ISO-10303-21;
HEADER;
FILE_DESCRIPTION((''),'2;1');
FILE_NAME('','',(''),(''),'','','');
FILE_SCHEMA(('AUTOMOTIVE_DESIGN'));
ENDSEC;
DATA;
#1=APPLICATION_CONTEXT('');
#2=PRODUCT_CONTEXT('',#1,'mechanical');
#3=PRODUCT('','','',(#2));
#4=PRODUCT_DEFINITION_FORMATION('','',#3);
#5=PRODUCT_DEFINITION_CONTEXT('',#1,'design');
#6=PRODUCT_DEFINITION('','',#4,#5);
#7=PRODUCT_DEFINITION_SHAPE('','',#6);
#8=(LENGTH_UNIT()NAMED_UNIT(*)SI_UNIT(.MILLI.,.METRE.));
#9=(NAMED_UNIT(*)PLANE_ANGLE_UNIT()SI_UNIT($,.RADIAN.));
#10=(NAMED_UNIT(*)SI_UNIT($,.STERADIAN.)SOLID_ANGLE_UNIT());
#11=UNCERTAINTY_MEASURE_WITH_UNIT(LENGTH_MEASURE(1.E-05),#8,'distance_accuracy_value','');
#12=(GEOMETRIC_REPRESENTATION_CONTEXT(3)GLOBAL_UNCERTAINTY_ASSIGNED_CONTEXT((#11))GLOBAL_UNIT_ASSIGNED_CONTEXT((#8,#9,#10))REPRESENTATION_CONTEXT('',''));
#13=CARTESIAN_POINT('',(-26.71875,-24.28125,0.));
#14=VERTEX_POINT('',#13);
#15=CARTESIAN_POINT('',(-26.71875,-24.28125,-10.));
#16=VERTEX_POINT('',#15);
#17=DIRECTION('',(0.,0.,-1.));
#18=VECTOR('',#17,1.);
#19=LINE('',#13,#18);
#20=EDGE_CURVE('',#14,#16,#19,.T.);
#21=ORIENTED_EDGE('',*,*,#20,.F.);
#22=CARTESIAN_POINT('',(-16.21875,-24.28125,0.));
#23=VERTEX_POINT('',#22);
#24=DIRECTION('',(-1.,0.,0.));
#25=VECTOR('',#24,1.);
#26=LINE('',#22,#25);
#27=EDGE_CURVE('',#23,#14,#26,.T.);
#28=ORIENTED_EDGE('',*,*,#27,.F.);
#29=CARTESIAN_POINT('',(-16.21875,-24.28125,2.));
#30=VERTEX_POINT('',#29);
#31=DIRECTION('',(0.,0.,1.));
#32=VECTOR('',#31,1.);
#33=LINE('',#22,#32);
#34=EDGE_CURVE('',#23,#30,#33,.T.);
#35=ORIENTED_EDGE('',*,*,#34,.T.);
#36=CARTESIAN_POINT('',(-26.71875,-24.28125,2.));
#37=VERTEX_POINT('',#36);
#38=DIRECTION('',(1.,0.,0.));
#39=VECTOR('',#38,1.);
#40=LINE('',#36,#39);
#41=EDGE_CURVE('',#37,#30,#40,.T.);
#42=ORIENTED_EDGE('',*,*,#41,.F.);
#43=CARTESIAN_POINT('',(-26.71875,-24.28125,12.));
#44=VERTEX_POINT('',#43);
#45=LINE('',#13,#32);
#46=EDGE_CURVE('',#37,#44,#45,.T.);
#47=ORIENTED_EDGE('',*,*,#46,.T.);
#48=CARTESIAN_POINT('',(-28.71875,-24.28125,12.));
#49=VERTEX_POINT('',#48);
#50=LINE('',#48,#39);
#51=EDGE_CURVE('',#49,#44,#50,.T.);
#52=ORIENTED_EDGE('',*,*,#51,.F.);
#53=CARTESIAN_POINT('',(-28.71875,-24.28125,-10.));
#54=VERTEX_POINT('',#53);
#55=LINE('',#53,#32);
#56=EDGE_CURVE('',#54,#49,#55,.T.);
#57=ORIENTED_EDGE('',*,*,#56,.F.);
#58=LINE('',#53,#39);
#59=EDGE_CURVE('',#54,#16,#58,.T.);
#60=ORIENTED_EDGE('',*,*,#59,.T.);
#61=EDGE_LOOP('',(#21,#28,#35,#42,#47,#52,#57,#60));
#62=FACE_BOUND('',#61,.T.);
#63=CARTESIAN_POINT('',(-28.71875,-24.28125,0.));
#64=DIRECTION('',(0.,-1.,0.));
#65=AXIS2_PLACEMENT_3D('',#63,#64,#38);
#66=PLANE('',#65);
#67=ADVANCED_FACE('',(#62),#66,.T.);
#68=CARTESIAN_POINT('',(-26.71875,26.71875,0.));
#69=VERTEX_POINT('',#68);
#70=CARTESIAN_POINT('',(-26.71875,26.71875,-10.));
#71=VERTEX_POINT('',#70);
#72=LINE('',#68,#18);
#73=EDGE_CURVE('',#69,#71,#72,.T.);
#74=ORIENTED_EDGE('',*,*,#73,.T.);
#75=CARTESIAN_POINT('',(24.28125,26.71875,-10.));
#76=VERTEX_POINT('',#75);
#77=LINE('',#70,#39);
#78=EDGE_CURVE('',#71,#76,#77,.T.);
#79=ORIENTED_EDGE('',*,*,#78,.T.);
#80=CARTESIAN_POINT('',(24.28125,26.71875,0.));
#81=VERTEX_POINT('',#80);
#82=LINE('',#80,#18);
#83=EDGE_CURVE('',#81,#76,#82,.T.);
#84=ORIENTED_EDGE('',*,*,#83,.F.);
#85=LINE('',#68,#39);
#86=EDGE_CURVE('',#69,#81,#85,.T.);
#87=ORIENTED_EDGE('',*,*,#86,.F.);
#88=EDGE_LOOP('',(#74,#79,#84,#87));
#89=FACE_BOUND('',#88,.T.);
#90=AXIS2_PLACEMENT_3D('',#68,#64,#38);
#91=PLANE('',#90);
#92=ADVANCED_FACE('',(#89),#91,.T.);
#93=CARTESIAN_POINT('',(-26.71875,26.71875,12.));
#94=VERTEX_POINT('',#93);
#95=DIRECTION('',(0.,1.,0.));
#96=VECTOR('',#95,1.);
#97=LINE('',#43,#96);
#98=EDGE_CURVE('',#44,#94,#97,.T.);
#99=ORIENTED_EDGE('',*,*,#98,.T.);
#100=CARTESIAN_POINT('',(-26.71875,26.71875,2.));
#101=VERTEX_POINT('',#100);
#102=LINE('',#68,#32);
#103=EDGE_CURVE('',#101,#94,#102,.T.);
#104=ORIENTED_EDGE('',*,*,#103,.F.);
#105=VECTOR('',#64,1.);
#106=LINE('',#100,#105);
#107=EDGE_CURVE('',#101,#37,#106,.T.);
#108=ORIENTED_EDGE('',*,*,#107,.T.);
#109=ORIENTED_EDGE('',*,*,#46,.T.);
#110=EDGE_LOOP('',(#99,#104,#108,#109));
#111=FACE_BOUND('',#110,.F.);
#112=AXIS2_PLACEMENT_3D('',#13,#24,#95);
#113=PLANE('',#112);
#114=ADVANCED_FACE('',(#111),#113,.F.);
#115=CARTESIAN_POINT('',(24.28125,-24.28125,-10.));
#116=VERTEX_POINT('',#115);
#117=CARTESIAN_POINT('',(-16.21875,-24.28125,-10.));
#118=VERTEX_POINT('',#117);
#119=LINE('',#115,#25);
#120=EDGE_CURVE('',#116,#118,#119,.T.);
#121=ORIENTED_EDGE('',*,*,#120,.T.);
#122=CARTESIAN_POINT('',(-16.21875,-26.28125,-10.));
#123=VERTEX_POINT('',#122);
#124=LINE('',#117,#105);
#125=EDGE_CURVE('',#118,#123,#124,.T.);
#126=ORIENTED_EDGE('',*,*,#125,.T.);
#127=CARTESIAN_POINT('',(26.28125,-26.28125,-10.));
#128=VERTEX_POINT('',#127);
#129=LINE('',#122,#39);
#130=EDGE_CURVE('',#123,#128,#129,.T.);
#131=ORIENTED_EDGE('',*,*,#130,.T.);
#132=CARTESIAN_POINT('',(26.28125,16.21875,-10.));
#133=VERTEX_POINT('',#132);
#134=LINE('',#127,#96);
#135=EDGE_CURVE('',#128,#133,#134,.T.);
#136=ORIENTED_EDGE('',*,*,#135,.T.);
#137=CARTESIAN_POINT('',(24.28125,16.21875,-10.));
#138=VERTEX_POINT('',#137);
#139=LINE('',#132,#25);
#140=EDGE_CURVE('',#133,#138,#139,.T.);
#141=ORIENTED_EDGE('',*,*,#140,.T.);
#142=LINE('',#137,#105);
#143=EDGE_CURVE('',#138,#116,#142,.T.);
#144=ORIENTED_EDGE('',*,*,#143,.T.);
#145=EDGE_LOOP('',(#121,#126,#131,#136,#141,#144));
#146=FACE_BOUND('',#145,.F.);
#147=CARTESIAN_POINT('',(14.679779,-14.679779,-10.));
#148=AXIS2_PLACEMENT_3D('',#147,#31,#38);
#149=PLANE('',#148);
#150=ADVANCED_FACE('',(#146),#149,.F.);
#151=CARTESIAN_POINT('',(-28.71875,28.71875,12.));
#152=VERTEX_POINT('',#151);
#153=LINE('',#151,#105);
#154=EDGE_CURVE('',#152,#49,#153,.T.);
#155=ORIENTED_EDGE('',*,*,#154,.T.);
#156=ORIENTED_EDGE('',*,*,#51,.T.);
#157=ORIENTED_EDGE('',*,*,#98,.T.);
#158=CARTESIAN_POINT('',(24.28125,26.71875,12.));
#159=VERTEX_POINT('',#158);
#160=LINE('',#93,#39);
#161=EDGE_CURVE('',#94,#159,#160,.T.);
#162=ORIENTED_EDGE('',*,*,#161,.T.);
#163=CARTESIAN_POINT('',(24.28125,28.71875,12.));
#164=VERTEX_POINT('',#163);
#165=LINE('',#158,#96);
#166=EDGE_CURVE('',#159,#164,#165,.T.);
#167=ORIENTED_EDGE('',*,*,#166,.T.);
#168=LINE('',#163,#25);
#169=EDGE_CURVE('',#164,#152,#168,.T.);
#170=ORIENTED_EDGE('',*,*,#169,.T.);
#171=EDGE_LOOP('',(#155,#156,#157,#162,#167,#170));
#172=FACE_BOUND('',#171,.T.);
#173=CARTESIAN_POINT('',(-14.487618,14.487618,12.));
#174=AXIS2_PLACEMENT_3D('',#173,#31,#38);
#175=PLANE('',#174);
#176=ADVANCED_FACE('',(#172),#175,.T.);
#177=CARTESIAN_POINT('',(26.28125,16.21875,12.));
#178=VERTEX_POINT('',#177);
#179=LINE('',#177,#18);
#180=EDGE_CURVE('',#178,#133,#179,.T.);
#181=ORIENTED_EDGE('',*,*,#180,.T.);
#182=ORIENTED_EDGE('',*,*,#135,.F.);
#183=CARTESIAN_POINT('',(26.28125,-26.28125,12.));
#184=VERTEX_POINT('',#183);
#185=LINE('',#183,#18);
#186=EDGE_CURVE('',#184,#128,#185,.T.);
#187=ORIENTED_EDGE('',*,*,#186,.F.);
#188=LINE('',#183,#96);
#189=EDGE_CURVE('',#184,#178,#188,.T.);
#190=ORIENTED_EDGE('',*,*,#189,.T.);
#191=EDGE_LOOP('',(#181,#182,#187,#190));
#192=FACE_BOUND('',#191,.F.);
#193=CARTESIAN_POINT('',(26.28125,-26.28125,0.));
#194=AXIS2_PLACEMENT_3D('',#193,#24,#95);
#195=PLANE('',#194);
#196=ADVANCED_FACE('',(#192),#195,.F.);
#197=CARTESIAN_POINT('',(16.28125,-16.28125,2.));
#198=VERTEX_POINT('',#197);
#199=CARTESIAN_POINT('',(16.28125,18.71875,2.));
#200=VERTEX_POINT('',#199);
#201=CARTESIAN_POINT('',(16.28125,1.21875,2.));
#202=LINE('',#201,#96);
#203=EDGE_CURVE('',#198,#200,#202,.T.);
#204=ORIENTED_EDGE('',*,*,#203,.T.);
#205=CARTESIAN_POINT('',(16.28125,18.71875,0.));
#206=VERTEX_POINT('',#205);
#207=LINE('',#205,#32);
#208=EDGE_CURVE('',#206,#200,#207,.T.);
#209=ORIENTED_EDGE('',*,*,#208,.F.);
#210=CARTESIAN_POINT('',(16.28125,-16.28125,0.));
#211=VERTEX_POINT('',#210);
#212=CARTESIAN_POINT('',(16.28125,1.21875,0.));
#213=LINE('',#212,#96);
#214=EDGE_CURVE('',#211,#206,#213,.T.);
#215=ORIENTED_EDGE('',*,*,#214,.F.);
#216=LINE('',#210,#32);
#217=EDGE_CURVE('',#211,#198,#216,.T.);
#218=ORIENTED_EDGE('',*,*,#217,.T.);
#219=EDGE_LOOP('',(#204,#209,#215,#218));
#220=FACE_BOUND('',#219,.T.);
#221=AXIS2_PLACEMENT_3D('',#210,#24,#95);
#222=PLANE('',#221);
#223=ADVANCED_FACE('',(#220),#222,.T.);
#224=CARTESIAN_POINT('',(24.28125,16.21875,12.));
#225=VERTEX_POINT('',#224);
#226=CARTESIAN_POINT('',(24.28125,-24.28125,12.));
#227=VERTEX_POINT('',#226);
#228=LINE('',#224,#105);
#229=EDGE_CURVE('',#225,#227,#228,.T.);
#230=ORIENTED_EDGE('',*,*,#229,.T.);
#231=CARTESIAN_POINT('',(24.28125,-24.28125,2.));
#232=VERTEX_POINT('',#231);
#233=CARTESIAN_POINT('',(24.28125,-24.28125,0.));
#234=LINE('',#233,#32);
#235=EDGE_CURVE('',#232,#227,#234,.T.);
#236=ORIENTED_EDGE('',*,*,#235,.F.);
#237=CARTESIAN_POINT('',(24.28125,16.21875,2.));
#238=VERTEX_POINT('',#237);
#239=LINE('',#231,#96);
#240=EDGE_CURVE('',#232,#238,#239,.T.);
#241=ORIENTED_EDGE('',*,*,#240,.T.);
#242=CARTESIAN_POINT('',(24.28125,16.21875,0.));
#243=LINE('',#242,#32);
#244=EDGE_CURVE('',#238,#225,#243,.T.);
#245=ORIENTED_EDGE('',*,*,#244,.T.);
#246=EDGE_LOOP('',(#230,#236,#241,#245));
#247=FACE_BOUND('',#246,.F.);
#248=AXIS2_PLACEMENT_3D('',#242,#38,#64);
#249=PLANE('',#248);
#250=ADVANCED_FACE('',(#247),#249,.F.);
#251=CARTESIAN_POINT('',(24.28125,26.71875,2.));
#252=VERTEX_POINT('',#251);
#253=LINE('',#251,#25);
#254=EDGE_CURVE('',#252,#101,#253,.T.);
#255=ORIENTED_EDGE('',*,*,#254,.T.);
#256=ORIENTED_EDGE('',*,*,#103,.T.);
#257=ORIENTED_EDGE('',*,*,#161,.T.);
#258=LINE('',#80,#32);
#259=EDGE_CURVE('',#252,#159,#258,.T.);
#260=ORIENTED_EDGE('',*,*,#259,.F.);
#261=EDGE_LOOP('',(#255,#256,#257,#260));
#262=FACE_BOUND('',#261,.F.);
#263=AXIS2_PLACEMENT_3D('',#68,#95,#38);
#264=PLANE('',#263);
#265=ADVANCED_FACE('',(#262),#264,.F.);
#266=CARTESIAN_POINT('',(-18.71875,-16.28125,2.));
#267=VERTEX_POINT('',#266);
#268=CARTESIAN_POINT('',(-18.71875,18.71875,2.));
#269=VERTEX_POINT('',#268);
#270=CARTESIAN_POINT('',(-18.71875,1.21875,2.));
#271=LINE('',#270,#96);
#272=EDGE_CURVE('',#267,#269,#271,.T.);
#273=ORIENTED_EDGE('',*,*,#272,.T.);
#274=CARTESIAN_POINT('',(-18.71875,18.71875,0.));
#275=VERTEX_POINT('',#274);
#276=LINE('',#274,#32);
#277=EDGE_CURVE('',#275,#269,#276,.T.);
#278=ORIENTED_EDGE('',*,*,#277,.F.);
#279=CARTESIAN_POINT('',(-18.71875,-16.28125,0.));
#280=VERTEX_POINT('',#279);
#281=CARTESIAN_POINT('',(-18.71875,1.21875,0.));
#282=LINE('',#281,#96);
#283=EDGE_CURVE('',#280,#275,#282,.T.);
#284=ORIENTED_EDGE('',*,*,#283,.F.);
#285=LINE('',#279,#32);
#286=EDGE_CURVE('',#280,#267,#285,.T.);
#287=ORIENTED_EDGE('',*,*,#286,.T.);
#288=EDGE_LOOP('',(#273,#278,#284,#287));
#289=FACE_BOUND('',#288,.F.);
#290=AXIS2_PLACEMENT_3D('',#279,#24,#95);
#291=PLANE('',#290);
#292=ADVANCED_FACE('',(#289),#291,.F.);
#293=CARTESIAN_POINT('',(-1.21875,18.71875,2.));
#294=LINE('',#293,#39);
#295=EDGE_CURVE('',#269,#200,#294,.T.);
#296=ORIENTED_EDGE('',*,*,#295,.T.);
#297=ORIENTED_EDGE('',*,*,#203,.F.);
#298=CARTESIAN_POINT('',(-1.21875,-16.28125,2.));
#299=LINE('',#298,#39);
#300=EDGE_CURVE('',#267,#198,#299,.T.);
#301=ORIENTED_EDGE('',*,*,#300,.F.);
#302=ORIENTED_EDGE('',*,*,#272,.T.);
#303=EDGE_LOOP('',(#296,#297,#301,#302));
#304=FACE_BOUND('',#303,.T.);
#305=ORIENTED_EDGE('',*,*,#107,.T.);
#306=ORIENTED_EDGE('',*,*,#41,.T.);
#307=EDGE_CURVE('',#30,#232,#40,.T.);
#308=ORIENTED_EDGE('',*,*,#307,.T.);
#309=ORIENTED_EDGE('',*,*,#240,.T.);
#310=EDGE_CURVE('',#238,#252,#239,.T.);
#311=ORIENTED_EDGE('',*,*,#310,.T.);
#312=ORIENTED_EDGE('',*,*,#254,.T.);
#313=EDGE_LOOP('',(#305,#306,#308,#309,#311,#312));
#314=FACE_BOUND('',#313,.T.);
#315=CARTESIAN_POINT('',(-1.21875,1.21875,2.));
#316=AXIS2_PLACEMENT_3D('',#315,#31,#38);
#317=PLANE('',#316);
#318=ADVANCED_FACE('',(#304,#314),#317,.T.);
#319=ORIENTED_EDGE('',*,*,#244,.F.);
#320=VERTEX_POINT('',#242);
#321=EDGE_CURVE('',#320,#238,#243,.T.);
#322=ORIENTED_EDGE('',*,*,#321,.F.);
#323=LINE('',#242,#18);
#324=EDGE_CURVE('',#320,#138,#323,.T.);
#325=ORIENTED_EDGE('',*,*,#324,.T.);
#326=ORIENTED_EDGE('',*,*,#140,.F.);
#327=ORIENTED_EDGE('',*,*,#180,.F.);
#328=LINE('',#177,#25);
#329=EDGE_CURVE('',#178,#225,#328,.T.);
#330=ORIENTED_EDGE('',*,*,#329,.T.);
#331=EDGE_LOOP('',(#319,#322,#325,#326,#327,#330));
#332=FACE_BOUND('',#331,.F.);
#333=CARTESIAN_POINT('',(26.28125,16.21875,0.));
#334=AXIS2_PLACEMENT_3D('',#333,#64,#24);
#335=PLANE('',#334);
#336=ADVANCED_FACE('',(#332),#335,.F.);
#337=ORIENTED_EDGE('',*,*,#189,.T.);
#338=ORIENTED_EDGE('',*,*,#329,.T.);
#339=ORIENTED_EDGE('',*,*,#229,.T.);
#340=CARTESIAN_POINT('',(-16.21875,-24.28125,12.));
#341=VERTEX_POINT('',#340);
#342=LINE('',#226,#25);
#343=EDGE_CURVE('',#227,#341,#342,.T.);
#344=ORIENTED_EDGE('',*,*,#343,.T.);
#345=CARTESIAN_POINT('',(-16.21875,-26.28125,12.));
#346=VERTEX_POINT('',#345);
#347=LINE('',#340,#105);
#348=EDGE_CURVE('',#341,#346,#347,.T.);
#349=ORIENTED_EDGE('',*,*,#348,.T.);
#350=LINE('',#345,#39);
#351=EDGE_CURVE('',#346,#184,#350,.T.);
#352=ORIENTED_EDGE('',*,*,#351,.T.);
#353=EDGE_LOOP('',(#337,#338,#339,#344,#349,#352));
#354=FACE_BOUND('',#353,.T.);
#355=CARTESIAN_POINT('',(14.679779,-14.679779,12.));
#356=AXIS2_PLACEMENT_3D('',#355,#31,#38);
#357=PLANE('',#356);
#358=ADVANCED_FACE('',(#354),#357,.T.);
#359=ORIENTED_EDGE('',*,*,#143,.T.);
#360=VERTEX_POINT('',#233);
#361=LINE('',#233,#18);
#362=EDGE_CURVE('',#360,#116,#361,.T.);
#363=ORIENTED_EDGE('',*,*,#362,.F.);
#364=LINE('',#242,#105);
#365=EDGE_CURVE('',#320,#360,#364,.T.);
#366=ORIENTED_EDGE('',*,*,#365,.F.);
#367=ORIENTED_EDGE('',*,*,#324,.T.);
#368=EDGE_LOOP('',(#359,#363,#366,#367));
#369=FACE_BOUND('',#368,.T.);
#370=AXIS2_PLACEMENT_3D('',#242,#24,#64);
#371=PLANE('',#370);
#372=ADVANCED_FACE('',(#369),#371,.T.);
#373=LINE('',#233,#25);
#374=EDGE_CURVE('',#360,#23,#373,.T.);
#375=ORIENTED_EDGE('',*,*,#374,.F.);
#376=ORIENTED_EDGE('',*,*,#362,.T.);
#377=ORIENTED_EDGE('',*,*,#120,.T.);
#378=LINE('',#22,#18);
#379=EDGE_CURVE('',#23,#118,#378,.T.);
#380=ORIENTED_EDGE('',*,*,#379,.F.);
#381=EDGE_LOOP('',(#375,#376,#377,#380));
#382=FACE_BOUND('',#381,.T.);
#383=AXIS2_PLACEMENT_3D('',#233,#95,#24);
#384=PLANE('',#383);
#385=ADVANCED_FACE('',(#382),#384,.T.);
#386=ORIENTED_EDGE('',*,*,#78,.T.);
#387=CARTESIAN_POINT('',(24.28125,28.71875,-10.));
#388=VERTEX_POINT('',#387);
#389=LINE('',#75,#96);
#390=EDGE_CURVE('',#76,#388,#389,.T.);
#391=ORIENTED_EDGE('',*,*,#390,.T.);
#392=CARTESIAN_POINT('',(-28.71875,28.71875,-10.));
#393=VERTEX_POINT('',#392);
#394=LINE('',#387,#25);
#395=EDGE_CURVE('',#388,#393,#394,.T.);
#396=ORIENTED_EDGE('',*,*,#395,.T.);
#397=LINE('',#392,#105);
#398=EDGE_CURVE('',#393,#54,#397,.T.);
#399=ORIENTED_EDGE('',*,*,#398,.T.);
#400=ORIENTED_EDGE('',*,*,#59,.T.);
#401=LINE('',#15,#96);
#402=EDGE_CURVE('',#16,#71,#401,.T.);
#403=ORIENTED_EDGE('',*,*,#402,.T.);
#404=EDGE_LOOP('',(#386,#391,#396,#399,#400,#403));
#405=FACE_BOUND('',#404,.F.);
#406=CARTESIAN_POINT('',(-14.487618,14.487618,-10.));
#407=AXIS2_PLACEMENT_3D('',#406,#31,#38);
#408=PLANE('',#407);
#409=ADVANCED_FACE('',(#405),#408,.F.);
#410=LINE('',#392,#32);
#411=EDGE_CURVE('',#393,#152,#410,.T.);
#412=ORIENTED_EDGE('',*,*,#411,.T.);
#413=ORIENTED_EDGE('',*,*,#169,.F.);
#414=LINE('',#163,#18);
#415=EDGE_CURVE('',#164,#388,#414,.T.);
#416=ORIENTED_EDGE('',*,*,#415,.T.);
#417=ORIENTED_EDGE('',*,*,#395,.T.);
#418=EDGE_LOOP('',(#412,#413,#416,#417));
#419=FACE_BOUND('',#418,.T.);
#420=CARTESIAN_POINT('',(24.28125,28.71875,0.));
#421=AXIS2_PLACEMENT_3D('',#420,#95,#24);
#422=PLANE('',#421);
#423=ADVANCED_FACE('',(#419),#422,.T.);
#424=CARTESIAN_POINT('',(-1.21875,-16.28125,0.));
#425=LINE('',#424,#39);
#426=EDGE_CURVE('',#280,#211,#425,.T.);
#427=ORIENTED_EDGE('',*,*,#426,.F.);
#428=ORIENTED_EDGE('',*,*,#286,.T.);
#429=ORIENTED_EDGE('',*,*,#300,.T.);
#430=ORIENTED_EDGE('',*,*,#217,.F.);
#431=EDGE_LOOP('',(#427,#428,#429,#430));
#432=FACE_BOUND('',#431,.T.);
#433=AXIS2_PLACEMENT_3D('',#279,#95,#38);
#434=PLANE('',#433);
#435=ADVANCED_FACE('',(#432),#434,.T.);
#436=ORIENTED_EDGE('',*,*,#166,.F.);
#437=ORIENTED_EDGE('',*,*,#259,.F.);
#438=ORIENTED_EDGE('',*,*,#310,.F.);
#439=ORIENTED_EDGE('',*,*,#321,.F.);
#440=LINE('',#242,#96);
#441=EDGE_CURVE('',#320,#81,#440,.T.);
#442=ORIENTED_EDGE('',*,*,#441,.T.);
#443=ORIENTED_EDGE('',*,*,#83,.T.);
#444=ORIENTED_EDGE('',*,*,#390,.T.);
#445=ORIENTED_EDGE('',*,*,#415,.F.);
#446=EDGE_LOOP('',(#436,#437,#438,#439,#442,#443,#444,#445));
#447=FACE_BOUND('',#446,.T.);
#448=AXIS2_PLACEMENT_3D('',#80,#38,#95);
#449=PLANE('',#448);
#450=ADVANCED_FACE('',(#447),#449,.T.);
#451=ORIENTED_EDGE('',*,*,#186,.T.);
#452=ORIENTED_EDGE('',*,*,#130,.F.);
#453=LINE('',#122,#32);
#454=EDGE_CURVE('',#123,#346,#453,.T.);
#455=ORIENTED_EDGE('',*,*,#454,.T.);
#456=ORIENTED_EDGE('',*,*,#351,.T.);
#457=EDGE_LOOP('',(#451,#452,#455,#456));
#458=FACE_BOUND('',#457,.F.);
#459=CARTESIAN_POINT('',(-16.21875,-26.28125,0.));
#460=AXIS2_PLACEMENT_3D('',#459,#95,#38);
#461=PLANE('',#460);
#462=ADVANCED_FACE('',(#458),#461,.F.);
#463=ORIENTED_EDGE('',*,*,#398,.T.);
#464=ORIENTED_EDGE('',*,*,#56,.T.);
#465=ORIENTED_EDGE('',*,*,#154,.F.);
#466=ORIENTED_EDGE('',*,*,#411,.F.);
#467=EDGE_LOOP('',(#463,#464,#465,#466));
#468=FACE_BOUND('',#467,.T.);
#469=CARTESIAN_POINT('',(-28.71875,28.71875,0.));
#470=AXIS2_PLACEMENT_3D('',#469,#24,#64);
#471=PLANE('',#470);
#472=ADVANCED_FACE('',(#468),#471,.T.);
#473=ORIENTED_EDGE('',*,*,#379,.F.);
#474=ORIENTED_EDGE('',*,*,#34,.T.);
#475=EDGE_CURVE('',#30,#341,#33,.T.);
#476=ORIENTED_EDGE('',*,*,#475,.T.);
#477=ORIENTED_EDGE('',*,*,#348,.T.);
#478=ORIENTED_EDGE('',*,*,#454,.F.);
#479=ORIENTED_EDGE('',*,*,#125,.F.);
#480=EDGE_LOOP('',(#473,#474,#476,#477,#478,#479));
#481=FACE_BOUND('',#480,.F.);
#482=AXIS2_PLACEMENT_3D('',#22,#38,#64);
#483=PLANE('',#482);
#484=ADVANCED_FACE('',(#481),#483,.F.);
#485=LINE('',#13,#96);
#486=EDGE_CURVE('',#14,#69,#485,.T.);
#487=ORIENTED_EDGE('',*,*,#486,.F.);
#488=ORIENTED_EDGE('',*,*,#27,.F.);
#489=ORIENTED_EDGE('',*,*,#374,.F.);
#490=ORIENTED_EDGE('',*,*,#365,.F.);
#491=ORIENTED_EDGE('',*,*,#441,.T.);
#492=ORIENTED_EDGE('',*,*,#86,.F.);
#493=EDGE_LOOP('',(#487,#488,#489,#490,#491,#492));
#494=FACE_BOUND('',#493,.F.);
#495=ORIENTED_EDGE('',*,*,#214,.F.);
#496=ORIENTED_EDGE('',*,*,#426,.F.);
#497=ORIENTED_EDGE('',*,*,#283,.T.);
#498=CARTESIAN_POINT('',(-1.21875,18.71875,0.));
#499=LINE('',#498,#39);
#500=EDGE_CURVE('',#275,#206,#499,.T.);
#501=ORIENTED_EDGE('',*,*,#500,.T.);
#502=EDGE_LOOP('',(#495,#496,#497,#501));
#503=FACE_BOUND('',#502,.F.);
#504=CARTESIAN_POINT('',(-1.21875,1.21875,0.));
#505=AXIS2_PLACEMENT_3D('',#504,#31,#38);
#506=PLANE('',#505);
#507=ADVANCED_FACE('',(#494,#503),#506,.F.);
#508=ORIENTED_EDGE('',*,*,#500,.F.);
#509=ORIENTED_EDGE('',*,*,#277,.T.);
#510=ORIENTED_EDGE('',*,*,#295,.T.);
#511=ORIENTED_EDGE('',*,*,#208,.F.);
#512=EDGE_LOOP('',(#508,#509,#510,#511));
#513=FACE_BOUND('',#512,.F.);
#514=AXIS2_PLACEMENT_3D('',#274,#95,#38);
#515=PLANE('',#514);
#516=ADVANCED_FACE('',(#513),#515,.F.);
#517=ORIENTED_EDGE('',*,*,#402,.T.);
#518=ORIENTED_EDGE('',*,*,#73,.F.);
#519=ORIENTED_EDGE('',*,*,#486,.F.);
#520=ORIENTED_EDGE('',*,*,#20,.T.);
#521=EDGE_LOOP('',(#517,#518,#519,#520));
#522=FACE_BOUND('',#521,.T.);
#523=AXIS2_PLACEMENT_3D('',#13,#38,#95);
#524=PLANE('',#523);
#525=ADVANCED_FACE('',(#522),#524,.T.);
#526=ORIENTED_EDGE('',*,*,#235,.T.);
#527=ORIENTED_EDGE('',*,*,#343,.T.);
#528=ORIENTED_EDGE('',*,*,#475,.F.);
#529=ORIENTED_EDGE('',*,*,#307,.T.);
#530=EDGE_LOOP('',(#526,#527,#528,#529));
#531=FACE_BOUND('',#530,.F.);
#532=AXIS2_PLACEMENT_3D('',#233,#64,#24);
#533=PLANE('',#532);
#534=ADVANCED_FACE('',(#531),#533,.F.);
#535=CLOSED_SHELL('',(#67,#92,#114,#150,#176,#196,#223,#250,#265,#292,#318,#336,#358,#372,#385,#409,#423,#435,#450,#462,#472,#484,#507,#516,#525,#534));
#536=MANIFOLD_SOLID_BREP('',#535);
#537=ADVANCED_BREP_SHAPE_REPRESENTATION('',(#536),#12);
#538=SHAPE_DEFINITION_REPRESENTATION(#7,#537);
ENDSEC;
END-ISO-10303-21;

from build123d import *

# Parameters (mm, degrees)
F1_DEPTH = 12
F0_W     = 35
F0_H     = 35
F2_DEPTH = 2
F0_R     = 5
F3_DEPTH = 10


with BuildPart() as f1:
    # F0 (on Top) → F1 (new body)
    with BuildSketch(Plane.XY):
        Polygon((24.28125, 28.71875), (-28.71875, 28.71875), (-28.71875, -24.28125), (-26.71875, -24.28125), (-26.71875, 26.71875), (24.28125, 26.71875), align=None)
    extrude(amount=F1_DEPTH)



with BuildPart() as f1b:
    # F0 (on Top) → F1, piece 2 (new body)
    with BuildSketch(Plane.XY):
        Polygon((26.28125, -26.28125), (26.28125, 16.21875), (24.28125, 16.21875), (24.28125, -24.28125), (-16.21875, -24.28125), (-16.21875, -26.28125), align=None)
    extrude(amount=F1_DEPTH)


with BuildPart() as f1_1:
    add(f1.part)

    add(f1b.part)  # F2 merges F1b
    # F0 (on Top) → F2 (join)
    with BuildSketch(Plane.XY):
        Polygon((24.28125, 18.71875), (24.28125, 26.71875), (-26.71875, 26.71875), (-26.71875, -24.28125), (-18.71875, -24.28125), (-16.21875, -24.28125), (24.28125, -24.28125), (24.28125, 16.21875), align=None)
        with Locations((-1.21875, 1.21875)):
            Rectangle(F0_W, F0_H, mode=Mode.SUBTRACT)
    extrude(amount=F2_DEPTH)

    # F0 (on Top) → F3 (join)
    with BuildSketch(Plane.XY):
        Polygon((24.28125, 28.71875), (-28.71875, 28.71875), (-28.71875, -24.28125), (-26.71875, -24.28125), (-26.71875, 26.71875), (24.28125, 26.71875), align=None)
        Polygon((26.28125, -26.28125), (26.28125, 16.21875), (24.28125, 16.21875), (24.28125, -24.28125), (-16.21875, -24.28125), (-16.21875, -26.28125), align=None)
    extrude(amount=-F3_DEPTH)


with BuildPart() as f2:
    # F0 (on Top) → F2, piece 2 (new body)
    with BuildSketch(Plane.XY):
        with Locations((-1.21875, 1.21875)):
            Circle(F0_R)
    extrude(amount=F2_DEPTH)


solid = f1_1.part
